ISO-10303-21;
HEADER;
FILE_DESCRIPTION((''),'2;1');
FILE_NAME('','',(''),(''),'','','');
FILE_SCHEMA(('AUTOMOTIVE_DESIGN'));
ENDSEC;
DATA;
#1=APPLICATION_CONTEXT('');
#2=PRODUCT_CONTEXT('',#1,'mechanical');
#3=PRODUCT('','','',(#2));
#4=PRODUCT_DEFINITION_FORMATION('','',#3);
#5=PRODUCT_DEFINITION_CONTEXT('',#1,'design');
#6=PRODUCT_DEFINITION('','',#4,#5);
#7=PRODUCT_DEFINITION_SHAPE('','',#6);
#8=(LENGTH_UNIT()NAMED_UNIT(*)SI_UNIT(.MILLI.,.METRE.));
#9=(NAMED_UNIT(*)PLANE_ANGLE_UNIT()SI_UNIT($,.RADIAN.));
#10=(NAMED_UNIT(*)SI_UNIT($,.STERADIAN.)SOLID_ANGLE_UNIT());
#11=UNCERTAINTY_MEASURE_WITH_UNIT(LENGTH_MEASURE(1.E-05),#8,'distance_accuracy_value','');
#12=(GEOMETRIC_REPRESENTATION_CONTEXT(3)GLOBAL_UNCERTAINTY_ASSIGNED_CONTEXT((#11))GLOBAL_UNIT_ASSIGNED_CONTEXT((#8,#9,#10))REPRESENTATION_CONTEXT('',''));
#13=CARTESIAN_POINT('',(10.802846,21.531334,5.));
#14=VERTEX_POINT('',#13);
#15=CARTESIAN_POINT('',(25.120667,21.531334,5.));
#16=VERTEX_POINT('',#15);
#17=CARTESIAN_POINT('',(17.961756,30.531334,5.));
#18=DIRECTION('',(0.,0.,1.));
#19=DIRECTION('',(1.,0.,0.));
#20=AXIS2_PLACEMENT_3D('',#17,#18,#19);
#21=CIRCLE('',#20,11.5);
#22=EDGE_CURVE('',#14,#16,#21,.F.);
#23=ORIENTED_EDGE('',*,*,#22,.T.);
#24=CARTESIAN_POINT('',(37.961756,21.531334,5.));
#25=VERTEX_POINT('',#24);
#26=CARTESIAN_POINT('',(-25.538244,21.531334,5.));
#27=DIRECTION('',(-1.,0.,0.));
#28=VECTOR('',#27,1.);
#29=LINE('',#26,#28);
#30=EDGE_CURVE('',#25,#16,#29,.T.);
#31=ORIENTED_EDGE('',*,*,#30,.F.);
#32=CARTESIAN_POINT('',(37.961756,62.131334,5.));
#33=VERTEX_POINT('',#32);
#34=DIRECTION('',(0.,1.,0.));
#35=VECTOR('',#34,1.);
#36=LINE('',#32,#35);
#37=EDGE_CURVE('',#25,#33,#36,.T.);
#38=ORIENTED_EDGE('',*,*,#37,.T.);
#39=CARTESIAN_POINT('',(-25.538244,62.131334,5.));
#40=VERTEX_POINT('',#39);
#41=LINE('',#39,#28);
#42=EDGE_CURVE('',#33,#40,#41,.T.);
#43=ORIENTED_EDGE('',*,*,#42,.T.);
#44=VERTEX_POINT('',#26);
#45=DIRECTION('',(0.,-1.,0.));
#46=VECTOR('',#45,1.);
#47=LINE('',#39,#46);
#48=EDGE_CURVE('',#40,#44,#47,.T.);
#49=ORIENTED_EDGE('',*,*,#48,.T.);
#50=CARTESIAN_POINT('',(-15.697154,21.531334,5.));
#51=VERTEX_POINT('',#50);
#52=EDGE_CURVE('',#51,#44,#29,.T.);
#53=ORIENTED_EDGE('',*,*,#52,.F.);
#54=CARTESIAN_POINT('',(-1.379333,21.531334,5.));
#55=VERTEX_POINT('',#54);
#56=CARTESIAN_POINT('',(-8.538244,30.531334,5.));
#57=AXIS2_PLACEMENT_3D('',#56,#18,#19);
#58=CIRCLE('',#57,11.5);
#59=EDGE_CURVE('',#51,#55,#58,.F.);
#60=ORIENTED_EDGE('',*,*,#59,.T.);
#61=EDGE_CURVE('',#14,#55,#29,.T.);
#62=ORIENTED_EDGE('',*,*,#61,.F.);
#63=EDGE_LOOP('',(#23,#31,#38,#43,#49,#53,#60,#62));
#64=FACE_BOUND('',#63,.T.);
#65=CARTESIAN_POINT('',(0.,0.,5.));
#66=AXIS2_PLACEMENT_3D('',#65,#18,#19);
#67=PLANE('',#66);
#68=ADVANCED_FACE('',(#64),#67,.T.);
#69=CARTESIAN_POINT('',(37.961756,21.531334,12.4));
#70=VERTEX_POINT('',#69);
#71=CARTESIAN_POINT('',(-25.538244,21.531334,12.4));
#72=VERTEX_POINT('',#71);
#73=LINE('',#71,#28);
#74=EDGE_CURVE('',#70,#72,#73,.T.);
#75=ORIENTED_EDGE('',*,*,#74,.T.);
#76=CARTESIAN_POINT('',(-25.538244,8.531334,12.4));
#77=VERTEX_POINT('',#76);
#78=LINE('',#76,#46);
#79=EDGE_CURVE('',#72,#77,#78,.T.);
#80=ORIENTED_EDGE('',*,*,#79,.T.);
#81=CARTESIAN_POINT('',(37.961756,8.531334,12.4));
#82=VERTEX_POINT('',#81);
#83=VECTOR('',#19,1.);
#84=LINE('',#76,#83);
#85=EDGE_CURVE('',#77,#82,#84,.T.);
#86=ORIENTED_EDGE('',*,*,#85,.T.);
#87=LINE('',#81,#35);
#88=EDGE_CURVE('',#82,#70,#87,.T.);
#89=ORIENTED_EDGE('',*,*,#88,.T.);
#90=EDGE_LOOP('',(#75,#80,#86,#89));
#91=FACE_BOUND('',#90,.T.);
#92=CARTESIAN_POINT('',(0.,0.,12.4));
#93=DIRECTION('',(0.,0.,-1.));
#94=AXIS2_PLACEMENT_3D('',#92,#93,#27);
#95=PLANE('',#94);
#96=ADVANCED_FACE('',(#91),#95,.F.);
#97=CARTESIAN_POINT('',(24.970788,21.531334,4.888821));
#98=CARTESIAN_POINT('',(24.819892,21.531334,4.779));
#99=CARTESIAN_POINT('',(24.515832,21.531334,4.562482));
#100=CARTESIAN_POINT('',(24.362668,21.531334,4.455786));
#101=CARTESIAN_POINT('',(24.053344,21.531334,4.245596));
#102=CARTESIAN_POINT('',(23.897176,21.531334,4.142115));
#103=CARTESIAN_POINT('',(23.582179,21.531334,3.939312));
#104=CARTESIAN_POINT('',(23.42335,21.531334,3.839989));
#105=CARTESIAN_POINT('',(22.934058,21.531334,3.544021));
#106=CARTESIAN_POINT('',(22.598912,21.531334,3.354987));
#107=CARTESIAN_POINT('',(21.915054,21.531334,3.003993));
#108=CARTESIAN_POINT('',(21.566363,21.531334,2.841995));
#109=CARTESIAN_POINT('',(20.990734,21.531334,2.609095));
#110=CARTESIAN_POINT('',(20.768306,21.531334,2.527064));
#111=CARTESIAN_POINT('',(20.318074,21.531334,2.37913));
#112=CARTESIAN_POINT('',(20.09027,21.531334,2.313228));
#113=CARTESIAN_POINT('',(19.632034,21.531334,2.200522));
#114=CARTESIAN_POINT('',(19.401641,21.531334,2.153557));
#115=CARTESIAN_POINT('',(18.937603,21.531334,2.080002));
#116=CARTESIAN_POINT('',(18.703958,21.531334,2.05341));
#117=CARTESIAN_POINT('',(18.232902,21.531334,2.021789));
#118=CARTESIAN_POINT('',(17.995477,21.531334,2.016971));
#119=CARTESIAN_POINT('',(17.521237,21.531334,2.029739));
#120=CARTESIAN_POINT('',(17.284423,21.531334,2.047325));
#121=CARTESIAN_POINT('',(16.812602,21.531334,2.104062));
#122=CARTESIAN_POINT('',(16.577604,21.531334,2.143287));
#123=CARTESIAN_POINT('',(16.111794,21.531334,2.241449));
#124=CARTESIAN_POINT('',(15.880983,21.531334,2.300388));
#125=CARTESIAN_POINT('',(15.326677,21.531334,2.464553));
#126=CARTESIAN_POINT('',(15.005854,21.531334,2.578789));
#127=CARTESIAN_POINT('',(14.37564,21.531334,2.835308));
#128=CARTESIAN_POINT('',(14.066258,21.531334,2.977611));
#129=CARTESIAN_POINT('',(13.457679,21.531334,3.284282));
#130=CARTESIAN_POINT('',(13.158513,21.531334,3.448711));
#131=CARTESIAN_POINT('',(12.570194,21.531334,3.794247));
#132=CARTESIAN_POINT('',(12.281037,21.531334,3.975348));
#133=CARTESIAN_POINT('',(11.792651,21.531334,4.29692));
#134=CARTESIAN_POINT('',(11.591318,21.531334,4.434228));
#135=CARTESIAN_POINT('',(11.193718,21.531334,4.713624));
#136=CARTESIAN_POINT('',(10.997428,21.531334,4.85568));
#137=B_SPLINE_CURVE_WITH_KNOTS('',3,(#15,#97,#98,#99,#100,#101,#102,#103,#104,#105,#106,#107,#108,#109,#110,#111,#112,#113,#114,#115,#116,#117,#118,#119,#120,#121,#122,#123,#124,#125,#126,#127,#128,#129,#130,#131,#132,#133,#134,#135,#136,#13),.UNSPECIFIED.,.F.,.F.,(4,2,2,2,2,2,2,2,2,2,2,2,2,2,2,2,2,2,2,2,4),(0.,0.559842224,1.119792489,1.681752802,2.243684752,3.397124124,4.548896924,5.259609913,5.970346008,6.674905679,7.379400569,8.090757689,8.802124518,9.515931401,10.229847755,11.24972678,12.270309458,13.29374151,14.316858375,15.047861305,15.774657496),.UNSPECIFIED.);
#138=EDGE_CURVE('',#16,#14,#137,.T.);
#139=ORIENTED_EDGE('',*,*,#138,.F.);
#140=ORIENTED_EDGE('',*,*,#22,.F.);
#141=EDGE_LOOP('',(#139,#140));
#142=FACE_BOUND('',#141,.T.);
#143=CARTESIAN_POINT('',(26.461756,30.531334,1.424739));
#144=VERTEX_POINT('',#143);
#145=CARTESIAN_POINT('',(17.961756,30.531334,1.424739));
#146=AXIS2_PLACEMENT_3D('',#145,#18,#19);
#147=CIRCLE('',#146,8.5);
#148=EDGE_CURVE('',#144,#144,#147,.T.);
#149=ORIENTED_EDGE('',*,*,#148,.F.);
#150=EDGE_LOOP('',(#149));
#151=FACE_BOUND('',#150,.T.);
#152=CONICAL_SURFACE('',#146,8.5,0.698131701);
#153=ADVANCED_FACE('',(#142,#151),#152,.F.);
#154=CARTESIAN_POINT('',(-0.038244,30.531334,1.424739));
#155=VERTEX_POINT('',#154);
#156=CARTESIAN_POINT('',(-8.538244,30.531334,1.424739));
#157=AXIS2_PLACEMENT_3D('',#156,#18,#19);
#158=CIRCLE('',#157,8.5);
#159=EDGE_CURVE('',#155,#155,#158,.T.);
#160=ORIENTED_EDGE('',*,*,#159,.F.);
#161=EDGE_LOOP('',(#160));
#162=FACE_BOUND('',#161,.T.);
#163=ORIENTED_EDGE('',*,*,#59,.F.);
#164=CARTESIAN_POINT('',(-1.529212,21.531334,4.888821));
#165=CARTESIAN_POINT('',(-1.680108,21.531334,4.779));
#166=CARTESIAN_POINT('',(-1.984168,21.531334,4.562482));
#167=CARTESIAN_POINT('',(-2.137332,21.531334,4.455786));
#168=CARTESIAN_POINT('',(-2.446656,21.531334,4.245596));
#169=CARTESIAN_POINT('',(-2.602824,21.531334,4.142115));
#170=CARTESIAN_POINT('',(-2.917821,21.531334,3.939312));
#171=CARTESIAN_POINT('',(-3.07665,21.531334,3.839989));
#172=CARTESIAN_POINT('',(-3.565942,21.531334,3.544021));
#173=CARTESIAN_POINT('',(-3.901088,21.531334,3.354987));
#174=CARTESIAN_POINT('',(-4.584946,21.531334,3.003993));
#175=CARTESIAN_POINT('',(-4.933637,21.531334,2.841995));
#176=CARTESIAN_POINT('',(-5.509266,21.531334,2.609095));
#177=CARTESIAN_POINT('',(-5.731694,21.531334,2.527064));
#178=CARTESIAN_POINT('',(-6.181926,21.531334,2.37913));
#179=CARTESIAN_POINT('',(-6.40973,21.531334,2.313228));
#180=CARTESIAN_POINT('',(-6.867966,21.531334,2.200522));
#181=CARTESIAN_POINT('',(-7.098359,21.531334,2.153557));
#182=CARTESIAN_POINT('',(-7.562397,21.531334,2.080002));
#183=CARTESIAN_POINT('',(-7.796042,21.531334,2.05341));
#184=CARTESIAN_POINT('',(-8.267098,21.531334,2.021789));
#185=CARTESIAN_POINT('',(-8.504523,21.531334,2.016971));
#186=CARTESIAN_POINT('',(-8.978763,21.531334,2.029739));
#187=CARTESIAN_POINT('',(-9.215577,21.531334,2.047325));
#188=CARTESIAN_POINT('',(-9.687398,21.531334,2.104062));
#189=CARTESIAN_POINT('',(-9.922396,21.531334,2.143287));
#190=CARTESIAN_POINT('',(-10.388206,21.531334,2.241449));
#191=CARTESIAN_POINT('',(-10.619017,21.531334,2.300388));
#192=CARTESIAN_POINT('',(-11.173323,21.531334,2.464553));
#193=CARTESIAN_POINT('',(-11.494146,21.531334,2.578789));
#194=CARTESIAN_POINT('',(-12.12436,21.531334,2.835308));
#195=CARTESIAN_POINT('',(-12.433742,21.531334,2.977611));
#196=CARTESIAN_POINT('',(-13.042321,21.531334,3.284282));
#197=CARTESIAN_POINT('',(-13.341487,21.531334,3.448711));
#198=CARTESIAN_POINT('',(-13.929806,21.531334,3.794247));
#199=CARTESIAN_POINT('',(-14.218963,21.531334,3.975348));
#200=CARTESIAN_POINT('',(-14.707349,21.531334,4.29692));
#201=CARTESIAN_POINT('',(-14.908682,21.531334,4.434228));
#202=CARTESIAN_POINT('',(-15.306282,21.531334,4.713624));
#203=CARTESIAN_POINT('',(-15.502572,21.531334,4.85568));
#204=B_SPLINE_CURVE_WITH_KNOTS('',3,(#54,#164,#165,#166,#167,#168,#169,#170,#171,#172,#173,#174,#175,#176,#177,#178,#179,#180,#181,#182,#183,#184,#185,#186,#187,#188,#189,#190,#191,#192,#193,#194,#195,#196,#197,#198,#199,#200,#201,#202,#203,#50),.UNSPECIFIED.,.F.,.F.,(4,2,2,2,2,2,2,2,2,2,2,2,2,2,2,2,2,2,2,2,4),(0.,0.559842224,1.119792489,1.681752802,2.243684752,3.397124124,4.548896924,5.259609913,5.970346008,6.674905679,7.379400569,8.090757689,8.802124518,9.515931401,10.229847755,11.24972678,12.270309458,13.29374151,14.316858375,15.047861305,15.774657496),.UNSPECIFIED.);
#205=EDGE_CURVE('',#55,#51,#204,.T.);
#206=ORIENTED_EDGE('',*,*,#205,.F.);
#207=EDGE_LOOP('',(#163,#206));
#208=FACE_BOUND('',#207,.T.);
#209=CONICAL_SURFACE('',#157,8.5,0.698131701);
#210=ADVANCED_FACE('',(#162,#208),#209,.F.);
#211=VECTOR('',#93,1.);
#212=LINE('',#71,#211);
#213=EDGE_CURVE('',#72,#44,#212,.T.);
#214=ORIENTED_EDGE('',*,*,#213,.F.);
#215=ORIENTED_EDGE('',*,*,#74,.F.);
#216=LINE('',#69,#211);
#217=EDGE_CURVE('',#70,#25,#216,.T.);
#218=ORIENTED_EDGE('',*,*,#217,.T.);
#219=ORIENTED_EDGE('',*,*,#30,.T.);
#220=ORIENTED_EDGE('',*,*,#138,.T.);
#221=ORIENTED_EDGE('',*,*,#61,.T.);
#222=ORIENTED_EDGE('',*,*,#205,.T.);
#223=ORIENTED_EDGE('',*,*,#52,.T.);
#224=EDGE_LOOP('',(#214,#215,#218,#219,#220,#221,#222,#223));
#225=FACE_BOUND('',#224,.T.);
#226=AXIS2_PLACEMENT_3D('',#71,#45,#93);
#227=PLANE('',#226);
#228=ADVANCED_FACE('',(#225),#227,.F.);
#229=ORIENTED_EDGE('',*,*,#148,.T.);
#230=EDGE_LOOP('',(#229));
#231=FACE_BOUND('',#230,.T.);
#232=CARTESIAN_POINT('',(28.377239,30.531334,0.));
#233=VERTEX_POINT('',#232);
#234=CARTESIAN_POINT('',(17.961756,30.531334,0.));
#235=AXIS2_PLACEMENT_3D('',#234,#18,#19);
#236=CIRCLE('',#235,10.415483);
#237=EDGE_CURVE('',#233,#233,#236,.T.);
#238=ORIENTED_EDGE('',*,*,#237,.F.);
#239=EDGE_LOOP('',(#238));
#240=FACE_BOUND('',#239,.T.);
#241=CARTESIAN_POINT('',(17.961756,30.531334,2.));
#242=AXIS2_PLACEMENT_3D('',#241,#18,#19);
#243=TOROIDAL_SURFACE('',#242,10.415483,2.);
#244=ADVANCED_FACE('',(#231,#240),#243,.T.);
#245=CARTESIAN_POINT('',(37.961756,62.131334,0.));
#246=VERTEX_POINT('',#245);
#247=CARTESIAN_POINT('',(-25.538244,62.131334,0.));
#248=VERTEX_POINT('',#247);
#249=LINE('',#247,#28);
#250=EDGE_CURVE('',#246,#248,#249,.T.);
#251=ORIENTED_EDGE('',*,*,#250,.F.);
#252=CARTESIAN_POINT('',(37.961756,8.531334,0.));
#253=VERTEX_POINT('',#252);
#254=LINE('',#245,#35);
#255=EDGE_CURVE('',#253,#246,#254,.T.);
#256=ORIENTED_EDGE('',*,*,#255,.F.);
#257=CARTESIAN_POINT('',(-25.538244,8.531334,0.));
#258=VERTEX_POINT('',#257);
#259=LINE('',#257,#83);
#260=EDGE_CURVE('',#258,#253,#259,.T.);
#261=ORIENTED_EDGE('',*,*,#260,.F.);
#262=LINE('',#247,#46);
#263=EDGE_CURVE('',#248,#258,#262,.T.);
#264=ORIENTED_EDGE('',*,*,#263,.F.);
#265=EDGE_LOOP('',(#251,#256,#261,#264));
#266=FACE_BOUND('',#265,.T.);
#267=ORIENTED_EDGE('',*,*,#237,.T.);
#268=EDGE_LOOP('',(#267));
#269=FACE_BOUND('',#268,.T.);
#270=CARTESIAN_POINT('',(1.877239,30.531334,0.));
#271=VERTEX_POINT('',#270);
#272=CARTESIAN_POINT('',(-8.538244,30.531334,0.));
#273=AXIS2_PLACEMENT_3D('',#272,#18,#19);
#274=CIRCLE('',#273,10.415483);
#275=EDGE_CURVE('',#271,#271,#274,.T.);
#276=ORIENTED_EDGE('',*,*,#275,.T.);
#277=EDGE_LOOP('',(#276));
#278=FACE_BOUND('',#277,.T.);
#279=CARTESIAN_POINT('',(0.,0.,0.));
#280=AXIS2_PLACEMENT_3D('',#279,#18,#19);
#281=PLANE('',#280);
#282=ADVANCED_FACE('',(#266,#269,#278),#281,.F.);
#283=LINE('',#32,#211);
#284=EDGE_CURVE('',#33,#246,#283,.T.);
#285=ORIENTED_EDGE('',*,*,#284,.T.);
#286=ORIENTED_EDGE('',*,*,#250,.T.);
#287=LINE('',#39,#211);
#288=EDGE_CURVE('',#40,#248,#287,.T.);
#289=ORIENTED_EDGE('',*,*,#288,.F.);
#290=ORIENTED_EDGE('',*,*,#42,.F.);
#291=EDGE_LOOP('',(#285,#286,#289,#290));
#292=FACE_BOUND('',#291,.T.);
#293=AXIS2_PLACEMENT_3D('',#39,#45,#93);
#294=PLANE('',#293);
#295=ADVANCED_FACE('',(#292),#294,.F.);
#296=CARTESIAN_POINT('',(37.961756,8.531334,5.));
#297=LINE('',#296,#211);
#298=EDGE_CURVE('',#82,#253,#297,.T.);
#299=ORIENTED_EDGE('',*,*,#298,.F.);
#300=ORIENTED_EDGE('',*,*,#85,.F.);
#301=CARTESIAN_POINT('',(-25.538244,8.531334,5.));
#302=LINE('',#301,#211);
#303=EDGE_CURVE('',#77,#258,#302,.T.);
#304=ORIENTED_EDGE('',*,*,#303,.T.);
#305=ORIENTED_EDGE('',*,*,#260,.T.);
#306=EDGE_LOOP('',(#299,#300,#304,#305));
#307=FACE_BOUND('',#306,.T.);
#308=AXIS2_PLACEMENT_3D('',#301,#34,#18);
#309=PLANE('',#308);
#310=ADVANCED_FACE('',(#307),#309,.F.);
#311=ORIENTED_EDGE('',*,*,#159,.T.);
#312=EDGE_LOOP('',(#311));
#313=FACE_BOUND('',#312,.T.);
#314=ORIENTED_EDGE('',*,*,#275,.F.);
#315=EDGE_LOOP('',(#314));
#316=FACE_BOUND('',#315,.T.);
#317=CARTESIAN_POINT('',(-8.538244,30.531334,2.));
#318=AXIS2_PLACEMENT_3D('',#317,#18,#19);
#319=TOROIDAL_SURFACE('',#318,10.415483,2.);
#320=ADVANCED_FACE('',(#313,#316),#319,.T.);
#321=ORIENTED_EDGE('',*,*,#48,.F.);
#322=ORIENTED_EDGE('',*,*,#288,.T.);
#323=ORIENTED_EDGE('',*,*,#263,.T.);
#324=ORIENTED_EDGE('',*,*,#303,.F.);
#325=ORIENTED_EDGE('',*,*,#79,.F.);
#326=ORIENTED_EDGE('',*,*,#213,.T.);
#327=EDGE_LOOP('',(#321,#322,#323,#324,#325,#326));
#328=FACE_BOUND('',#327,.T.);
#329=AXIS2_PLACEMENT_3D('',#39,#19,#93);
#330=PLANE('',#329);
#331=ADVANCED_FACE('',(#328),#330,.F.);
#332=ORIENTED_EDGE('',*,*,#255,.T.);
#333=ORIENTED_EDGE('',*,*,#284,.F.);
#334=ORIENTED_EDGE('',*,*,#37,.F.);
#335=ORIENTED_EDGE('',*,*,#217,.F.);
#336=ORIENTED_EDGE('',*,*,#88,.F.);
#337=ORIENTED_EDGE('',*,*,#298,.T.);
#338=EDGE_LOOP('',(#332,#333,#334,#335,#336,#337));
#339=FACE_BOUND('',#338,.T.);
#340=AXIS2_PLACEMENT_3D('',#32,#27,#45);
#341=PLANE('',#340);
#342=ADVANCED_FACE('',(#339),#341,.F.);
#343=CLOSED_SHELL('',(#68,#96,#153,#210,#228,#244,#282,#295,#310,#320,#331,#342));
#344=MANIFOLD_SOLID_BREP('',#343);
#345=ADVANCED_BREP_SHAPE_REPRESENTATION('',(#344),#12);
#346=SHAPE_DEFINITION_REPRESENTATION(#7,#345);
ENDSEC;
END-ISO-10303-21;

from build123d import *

# Parameters (mm, degrees)
SKICA2_W                 = 63.5
SKICA2_H                 = 53.6
P_IDAT_VYSUNUT_M1_DEPTH  = 5
SKICA3_W                 = 63.5
SKICA3_H                 = 13
P_IDAT_VYSUNUT_M2_DEPTH  = 7.4
SKICA5_R                 = 8.5
ODEBRAT_VYSUNUT_M1_DEPTH = 74
ZKOSEN_1_SIZE            = 3
ZKOSEN_1_SIZE_2          = 3.575260778
ZAOBLIT1_R               = 2


with BuildPart() as part:
    # Skica2 → Přidat vysunutím1 (new body)
    with BuildSketch(Plane.XY):
        with Locations((6.211756064, 35.331333862)):
            Rectangle(SKICA2_W, SKICA2_H)
    extrude(amount=P_IDAT_VYSUNUT_M1_DEPTH)

    # Skica3 → Přidat vysunutím2 (add)
    with BuildSketch(Plane.XY.offset(5)):
        with Locations((6.211756064, 15.031333862)):
            Rectangle(SKICA3_W, SKICA3_H)
    extrude(amount=P_IDAT_VYSUNUT_M2_DEPTH)

    # Skica5 → Odebrat vysunutím1 (cut)
    with BuildSketch(Plane(origin=(0, 0, 0), x_dir=(-1, 0, 0), z_dir=(0, 0, -1))):
        with Locations((-17.961756064, 30.531333862)):
            Circle(SKICA5_R)
        with Locations((8.538243936, 30.531333862)):
            Circle(SKICA5_R)
    extrude(amount=-ODEBRAT_VYSUNUT_M1_DEPTH, mode=Mode.SUBTRACT)

    # Zkosení1
    # the kernel refuses this chamfer: 3.575260778, 3 mm, written as the material it takes off along each edge
    with BuildSketch(Plane(origin=(17.961756064, 30.531333862, 5), x_dir=(-1, 0, 0), z_dir=(0, -1, 0))) as zkosen_1_piece_1_section:
        Polygon((8.5 + ZKOSEN_1_SIZE, 0), (8.5, ZKOSEN_1_SIZE_2), (8.5, 0), align=None)
    zkosen_1_piece_1 = revolve(axis=Axis((17.961756064, 30.531333862, 5), (0, 0, -1)), mode=Mode.PRIVATE)
    zkosen_1_piece_1 = split(zkosen_1_piece_1, bisect_by=Plane(origin=(27.909166998, 21.531333862, 3.256497077), z_dir=(0, 1, 0)), keep=Keep.TOP, mode=Mode.PRIVATE)
    add(zkosen_1_piece_1, mode=Mode.SUBTRACT)
    with BuildSketch(Plane(origin=(-8.538243936, 30.531333862, 5), x_dir=(-1, 0, 0), z_dir=(0, -1, 0))) as zkosen_1_piece_2_section:
        Polygon((8.5 + ZKOSEN_1_SIZE, 0), (8.5, ZKOSEN_1_SIZE_2), (8.5, 0), align=None)
    zkosen_1_piece_2 = revolve(axis=Axis((-8.538243936, 30.531333862, 5), (0, 0, -1)), mode=Mode.PRIVATE)
    zkosen_1_piece_2 = split(zkosen_1_piece_2, bisect_by=Plane(origin=(1.409166998, 21.531333862, 3.256497077), z_dir=(0, 1, 0)), keep=Keep.TOP, mode=Mode.PRIVATE)
    add(zkosen_1_piece_2, mode=Mode.SUBTRACT)

    # Zaoblit1
    # the kernel refuses this fillet: 2 mm, written as the material it takes off along each edge
    with BuildSketch(Plane(origin=(17.961756064, 30.531333862, 0), x_dir=(-1, 0, 0), z_dir=(0, -1, 0))) as zaoblit1_piece_1:
        with BuildLine():
            CenterArc((10.415482978, -2), ZAOBLIT1_R, 90, 73.283856072)
            Line((8.5, -1.424739222), (8.46169034, -1.413234006))
            ThreePointArc((8.46169034, -1.413234006), (8.46, -0.712369611), (8.46, 0))
            Line((8.46, 0), (8.5, 0.04))
            Line((8.5, 0.04), (10.415482978, 0.04))
            Line((10.415482978, 0.04), (10.415482978, 0))
        make_face()
    revolve(axis=Axis((17.961756064, 30.531333862, 0), (0, 0, -1)), mode=Mode.SUBTRACT)
    with BuildSketch(Plane(origin=(-8.538243936, 30.531333862, 0), x_dir=(-1, 0, 0), z_dir=(0, -1, 0))) as zaoblit1_piece_2:
        with BuildLine():
            CenterArc((10.415482978, -2), ZAOBLIT1_R, 90, 73.283856072)
            Line((8.5, -1.424739222), (8.46169034, -1.413234006))
            ThreePointArc((8.46169034, -1.413234006), (8.46, -0.712369611), (8.46, 0))
            Line((8.46, 0), (8.5, 0.04))
            Line((8.5, 0.04), (10.415482978, 0.04))
            Line((10.415482978, 0.04), (10.415482978, 0))
        make_face()
    revolve(axis=Axis((-8.538243936, 30.531333862, 0), (0, 0, -1)), mode=Mode.SUBTRACT)


solid = part.part
